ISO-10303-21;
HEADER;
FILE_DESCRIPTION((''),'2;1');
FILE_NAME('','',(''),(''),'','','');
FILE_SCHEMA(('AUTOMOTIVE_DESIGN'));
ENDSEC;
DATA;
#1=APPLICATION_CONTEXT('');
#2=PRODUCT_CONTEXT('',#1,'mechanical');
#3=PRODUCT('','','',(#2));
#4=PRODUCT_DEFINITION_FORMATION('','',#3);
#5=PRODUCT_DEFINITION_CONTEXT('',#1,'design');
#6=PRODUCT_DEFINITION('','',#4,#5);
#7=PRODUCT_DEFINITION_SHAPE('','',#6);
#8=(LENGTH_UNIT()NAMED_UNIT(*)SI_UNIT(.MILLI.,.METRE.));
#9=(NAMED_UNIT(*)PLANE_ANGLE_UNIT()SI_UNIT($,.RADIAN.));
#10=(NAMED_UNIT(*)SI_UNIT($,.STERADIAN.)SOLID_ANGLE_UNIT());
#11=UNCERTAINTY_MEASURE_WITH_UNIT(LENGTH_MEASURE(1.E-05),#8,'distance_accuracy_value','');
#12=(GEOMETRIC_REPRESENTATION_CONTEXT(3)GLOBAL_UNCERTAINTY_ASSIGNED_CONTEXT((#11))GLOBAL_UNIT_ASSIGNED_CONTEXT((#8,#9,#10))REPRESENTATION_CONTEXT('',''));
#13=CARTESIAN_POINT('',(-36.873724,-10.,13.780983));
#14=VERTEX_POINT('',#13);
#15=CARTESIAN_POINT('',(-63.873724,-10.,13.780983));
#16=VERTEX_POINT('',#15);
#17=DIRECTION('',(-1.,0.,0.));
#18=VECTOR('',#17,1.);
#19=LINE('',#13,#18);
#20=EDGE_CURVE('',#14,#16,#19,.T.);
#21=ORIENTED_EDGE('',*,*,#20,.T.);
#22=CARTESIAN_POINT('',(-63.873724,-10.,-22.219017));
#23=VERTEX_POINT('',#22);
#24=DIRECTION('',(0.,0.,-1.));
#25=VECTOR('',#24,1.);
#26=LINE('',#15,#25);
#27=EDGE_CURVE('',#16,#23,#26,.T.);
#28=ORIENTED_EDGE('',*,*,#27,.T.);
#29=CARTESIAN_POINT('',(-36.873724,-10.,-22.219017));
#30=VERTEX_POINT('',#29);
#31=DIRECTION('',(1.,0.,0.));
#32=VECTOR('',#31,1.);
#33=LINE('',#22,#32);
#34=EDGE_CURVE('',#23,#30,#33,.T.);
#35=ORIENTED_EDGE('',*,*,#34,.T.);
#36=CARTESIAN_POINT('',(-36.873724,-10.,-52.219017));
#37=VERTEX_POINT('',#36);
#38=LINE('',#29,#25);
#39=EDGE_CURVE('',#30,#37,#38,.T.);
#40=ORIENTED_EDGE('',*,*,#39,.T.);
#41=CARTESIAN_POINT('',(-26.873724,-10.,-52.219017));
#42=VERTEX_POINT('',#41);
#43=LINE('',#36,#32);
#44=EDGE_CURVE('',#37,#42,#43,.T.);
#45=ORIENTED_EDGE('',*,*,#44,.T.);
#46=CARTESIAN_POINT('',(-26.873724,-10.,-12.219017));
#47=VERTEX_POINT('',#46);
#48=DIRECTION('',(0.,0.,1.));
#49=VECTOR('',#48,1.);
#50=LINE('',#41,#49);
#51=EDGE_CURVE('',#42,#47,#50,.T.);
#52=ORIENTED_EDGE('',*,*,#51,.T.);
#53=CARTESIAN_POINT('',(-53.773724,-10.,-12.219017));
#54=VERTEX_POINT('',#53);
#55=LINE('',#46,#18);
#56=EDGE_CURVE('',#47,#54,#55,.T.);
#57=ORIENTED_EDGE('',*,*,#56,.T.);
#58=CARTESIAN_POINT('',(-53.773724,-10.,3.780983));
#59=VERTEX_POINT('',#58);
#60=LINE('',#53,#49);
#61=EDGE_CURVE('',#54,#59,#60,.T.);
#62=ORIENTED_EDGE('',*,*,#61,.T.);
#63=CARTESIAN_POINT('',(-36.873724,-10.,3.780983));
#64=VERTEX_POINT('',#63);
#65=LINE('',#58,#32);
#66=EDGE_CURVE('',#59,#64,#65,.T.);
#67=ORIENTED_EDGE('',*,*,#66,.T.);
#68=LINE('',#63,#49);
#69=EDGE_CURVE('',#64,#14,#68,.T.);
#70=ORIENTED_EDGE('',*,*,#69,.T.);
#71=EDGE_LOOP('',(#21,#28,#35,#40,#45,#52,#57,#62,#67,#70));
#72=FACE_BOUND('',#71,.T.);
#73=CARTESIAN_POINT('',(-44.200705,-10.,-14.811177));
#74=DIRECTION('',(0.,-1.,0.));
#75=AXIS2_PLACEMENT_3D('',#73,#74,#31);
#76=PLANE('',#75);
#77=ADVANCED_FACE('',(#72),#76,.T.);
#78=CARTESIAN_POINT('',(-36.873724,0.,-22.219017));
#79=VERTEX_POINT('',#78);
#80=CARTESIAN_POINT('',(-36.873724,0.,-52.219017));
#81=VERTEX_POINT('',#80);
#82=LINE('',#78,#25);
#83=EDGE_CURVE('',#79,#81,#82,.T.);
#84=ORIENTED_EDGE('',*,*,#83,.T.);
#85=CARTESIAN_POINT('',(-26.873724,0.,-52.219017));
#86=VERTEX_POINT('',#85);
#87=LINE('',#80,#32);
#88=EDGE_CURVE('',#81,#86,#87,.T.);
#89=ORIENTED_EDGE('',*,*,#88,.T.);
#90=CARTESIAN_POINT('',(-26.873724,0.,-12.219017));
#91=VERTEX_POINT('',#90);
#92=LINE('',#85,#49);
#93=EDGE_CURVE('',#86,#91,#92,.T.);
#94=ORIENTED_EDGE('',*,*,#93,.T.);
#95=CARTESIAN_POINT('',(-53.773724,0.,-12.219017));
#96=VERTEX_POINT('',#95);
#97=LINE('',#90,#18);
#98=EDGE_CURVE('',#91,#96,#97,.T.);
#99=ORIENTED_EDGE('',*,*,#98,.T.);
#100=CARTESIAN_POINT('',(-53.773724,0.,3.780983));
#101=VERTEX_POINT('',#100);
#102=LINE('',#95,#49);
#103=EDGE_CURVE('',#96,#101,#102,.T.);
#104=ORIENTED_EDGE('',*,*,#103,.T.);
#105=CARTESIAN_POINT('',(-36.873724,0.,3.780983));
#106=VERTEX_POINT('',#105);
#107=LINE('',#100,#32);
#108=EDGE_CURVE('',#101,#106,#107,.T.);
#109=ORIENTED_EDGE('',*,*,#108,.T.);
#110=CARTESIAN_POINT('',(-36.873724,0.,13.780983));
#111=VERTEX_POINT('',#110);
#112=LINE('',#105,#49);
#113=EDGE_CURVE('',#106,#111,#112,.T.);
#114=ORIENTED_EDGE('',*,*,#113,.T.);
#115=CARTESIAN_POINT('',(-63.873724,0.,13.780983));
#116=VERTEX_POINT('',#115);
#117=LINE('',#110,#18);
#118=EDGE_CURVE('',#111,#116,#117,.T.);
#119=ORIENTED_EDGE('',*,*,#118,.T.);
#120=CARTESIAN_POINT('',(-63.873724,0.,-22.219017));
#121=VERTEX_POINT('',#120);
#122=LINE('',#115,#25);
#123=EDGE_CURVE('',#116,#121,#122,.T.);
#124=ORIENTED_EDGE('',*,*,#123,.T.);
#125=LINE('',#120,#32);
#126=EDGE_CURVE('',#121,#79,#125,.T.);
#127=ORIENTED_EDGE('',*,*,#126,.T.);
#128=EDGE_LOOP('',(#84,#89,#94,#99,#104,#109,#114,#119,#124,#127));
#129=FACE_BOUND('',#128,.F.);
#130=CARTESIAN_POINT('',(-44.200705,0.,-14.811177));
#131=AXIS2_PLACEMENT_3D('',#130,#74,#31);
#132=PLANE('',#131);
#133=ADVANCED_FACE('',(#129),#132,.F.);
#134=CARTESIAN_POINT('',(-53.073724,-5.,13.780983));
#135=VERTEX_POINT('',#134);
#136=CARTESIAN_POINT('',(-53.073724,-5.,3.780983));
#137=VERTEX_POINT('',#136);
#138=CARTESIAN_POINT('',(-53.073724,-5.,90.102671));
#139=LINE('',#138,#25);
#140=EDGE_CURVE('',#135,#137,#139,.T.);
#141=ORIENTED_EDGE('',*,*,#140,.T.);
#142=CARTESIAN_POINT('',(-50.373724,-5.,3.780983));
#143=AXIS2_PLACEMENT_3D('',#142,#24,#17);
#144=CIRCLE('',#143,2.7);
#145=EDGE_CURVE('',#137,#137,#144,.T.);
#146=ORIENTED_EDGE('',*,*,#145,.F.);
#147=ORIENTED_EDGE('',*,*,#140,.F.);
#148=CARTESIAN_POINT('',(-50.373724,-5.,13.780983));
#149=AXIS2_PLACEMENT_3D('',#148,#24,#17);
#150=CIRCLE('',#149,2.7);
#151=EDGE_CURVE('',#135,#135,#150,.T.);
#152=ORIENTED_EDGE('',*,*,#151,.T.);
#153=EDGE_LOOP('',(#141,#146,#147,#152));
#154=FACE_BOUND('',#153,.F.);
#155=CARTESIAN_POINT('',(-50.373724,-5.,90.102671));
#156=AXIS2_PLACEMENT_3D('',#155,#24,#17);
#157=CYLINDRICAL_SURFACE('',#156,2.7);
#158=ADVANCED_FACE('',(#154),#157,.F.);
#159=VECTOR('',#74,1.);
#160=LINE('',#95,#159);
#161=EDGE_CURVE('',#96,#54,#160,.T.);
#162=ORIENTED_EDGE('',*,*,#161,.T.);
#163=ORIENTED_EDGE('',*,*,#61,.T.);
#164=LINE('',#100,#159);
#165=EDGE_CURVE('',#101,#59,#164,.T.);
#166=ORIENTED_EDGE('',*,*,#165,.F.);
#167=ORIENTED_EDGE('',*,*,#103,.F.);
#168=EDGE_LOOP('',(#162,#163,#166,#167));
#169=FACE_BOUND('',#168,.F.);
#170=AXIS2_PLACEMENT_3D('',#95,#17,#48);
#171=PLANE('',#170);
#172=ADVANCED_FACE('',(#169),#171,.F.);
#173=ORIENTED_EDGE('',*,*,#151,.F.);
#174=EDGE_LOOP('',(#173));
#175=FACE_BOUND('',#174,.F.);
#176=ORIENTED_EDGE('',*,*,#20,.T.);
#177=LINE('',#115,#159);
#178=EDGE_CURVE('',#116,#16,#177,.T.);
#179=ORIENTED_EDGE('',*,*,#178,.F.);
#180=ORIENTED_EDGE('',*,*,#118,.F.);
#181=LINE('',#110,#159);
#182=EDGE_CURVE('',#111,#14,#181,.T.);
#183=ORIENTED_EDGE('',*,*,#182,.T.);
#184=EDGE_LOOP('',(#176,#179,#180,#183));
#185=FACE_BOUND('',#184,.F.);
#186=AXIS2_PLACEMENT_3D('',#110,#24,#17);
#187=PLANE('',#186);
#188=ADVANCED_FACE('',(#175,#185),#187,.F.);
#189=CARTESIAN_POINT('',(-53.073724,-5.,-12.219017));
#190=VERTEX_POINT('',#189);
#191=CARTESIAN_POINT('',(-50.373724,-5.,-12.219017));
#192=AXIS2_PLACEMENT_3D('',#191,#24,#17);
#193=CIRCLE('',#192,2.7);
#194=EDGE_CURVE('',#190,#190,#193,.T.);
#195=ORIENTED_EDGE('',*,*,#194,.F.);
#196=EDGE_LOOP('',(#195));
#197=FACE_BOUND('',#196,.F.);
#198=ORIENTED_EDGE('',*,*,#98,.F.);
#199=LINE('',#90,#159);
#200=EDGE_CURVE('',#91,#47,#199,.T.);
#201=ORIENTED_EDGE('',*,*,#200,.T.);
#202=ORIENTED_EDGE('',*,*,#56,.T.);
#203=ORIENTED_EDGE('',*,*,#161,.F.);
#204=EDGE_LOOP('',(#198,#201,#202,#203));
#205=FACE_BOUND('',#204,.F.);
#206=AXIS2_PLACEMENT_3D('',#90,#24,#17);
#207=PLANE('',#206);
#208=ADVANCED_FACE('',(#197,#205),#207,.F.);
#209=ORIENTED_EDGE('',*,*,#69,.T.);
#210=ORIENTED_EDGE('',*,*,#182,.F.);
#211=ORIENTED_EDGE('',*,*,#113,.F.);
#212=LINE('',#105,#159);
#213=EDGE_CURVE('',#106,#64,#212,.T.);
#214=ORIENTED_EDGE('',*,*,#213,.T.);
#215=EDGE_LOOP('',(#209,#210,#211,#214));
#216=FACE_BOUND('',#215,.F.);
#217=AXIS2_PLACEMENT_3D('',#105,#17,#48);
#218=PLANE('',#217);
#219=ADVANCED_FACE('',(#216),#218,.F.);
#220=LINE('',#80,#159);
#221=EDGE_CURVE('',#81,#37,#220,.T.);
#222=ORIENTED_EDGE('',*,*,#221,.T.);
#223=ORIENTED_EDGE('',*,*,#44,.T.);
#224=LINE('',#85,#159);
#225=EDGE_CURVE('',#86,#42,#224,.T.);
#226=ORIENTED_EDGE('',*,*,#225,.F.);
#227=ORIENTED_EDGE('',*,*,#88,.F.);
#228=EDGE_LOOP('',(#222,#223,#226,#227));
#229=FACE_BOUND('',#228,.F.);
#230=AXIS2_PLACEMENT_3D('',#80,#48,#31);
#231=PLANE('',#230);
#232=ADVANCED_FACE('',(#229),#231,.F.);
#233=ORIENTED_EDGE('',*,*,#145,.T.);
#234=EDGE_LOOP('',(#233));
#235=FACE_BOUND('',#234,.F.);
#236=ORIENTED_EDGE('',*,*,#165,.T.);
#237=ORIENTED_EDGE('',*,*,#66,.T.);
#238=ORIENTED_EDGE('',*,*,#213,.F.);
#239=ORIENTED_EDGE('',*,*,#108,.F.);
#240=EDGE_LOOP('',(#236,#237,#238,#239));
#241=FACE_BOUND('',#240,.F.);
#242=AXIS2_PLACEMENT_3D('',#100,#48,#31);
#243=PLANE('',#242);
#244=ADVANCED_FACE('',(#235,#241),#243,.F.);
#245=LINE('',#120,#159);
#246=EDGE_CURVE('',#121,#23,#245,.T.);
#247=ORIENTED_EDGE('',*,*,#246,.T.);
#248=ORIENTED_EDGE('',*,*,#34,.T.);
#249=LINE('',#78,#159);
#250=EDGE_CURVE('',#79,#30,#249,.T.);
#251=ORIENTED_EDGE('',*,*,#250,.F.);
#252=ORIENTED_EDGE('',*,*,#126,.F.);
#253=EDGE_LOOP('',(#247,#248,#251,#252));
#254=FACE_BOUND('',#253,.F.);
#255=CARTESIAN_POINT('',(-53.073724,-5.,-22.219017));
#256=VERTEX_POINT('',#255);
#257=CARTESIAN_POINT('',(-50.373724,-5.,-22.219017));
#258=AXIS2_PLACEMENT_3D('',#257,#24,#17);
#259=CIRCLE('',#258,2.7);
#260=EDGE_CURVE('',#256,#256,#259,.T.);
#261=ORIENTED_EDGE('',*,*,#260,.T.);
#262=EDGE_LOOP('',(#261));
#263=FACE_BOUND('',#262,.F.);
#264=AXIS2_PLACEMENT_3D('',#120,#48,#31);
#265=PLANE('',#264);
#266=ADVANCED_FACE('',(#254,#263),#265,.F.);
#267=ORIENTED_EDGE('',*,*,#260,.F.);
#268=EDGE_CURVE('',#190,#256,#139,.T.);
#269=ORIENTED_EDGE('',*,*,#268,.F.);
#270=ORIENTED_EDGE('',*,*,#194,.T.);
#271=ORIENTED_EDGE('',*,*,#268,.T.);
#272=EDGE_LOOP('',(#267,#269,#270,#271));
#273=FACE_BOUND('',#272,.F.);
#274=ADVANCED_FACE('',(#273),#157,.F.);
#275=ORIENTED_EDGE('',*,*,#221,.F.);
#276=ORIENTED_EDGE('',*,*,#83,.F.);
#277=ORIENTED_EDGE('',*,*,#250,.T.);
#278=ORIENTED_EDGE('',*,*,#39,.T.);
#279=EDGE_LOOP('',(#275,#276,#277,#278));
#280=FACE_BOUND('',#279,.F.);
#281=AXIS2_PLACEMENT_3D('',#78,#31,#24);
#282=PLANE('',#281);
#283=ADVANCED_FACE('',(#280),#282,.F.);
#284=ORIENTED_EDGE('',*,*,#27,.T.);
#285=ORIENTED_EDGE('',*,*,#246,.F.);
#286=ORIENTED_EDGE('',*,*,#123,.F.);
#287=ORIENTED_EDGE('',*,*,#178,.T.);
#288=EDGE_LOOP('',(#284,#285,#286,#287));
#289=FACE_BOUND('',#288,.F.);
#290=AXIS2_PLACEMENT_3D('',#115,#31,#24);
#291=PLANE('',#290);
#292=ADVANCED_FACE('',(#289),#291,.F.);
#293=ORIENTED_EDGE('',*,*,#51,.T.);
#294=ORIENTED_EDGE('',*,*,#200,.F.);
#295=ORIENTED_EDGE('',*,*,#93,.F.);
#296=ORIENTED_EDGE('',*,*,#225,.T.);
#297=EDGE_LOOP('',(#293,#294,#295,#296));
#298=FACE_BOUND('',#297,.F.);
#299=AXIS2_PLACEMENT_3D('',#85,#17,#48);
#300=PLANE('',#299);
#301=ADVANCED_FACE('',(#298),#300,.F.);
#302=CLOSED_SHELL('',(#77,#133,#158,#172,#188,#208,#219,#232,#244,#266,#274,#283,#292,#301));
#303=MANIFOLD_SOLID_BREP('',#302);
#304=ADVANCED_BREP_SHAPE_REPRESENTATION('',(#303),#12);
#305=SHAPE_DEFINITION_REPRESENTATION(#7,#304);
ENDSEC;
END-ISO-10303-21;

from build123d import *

# Parameters (mm, degrees)
F2_DEPTH = 10
F4_D     = 5.4


# Not quite as in the source:
# - a feature names something its author has since deleted; it is built from what else it names


with BuildPart() as f2:
    # F1 (on Front) → F2 (new body)
    with BuildSketch(Plane.XZ):
        Polygon((-36.8737237304, 13.780983012), (-63.8737237304, 13.780983012), (-63.8737237304, -22.219016988), (-36.8737237304, -22.219016988), (-36.8737237304, -52.219016988), (-26.8737237304, -52.219016988), (-26.8737237304, -12.219016988), (-36.8737237304, -12.219016988), (-53.7737237304, -12.219016988), (-53.7737237304, 3.780983012), (-36.8737237304, 3.780983012), align=None)
    extrude(amount=F2_DEPTH)

    # F4 (through all)
    with Locations(Plane.XY.offset(13.780983012)):
        with Locations((-50.3737237304, -5)):
            Hole(F4_D / 2)


solid = f2.part
